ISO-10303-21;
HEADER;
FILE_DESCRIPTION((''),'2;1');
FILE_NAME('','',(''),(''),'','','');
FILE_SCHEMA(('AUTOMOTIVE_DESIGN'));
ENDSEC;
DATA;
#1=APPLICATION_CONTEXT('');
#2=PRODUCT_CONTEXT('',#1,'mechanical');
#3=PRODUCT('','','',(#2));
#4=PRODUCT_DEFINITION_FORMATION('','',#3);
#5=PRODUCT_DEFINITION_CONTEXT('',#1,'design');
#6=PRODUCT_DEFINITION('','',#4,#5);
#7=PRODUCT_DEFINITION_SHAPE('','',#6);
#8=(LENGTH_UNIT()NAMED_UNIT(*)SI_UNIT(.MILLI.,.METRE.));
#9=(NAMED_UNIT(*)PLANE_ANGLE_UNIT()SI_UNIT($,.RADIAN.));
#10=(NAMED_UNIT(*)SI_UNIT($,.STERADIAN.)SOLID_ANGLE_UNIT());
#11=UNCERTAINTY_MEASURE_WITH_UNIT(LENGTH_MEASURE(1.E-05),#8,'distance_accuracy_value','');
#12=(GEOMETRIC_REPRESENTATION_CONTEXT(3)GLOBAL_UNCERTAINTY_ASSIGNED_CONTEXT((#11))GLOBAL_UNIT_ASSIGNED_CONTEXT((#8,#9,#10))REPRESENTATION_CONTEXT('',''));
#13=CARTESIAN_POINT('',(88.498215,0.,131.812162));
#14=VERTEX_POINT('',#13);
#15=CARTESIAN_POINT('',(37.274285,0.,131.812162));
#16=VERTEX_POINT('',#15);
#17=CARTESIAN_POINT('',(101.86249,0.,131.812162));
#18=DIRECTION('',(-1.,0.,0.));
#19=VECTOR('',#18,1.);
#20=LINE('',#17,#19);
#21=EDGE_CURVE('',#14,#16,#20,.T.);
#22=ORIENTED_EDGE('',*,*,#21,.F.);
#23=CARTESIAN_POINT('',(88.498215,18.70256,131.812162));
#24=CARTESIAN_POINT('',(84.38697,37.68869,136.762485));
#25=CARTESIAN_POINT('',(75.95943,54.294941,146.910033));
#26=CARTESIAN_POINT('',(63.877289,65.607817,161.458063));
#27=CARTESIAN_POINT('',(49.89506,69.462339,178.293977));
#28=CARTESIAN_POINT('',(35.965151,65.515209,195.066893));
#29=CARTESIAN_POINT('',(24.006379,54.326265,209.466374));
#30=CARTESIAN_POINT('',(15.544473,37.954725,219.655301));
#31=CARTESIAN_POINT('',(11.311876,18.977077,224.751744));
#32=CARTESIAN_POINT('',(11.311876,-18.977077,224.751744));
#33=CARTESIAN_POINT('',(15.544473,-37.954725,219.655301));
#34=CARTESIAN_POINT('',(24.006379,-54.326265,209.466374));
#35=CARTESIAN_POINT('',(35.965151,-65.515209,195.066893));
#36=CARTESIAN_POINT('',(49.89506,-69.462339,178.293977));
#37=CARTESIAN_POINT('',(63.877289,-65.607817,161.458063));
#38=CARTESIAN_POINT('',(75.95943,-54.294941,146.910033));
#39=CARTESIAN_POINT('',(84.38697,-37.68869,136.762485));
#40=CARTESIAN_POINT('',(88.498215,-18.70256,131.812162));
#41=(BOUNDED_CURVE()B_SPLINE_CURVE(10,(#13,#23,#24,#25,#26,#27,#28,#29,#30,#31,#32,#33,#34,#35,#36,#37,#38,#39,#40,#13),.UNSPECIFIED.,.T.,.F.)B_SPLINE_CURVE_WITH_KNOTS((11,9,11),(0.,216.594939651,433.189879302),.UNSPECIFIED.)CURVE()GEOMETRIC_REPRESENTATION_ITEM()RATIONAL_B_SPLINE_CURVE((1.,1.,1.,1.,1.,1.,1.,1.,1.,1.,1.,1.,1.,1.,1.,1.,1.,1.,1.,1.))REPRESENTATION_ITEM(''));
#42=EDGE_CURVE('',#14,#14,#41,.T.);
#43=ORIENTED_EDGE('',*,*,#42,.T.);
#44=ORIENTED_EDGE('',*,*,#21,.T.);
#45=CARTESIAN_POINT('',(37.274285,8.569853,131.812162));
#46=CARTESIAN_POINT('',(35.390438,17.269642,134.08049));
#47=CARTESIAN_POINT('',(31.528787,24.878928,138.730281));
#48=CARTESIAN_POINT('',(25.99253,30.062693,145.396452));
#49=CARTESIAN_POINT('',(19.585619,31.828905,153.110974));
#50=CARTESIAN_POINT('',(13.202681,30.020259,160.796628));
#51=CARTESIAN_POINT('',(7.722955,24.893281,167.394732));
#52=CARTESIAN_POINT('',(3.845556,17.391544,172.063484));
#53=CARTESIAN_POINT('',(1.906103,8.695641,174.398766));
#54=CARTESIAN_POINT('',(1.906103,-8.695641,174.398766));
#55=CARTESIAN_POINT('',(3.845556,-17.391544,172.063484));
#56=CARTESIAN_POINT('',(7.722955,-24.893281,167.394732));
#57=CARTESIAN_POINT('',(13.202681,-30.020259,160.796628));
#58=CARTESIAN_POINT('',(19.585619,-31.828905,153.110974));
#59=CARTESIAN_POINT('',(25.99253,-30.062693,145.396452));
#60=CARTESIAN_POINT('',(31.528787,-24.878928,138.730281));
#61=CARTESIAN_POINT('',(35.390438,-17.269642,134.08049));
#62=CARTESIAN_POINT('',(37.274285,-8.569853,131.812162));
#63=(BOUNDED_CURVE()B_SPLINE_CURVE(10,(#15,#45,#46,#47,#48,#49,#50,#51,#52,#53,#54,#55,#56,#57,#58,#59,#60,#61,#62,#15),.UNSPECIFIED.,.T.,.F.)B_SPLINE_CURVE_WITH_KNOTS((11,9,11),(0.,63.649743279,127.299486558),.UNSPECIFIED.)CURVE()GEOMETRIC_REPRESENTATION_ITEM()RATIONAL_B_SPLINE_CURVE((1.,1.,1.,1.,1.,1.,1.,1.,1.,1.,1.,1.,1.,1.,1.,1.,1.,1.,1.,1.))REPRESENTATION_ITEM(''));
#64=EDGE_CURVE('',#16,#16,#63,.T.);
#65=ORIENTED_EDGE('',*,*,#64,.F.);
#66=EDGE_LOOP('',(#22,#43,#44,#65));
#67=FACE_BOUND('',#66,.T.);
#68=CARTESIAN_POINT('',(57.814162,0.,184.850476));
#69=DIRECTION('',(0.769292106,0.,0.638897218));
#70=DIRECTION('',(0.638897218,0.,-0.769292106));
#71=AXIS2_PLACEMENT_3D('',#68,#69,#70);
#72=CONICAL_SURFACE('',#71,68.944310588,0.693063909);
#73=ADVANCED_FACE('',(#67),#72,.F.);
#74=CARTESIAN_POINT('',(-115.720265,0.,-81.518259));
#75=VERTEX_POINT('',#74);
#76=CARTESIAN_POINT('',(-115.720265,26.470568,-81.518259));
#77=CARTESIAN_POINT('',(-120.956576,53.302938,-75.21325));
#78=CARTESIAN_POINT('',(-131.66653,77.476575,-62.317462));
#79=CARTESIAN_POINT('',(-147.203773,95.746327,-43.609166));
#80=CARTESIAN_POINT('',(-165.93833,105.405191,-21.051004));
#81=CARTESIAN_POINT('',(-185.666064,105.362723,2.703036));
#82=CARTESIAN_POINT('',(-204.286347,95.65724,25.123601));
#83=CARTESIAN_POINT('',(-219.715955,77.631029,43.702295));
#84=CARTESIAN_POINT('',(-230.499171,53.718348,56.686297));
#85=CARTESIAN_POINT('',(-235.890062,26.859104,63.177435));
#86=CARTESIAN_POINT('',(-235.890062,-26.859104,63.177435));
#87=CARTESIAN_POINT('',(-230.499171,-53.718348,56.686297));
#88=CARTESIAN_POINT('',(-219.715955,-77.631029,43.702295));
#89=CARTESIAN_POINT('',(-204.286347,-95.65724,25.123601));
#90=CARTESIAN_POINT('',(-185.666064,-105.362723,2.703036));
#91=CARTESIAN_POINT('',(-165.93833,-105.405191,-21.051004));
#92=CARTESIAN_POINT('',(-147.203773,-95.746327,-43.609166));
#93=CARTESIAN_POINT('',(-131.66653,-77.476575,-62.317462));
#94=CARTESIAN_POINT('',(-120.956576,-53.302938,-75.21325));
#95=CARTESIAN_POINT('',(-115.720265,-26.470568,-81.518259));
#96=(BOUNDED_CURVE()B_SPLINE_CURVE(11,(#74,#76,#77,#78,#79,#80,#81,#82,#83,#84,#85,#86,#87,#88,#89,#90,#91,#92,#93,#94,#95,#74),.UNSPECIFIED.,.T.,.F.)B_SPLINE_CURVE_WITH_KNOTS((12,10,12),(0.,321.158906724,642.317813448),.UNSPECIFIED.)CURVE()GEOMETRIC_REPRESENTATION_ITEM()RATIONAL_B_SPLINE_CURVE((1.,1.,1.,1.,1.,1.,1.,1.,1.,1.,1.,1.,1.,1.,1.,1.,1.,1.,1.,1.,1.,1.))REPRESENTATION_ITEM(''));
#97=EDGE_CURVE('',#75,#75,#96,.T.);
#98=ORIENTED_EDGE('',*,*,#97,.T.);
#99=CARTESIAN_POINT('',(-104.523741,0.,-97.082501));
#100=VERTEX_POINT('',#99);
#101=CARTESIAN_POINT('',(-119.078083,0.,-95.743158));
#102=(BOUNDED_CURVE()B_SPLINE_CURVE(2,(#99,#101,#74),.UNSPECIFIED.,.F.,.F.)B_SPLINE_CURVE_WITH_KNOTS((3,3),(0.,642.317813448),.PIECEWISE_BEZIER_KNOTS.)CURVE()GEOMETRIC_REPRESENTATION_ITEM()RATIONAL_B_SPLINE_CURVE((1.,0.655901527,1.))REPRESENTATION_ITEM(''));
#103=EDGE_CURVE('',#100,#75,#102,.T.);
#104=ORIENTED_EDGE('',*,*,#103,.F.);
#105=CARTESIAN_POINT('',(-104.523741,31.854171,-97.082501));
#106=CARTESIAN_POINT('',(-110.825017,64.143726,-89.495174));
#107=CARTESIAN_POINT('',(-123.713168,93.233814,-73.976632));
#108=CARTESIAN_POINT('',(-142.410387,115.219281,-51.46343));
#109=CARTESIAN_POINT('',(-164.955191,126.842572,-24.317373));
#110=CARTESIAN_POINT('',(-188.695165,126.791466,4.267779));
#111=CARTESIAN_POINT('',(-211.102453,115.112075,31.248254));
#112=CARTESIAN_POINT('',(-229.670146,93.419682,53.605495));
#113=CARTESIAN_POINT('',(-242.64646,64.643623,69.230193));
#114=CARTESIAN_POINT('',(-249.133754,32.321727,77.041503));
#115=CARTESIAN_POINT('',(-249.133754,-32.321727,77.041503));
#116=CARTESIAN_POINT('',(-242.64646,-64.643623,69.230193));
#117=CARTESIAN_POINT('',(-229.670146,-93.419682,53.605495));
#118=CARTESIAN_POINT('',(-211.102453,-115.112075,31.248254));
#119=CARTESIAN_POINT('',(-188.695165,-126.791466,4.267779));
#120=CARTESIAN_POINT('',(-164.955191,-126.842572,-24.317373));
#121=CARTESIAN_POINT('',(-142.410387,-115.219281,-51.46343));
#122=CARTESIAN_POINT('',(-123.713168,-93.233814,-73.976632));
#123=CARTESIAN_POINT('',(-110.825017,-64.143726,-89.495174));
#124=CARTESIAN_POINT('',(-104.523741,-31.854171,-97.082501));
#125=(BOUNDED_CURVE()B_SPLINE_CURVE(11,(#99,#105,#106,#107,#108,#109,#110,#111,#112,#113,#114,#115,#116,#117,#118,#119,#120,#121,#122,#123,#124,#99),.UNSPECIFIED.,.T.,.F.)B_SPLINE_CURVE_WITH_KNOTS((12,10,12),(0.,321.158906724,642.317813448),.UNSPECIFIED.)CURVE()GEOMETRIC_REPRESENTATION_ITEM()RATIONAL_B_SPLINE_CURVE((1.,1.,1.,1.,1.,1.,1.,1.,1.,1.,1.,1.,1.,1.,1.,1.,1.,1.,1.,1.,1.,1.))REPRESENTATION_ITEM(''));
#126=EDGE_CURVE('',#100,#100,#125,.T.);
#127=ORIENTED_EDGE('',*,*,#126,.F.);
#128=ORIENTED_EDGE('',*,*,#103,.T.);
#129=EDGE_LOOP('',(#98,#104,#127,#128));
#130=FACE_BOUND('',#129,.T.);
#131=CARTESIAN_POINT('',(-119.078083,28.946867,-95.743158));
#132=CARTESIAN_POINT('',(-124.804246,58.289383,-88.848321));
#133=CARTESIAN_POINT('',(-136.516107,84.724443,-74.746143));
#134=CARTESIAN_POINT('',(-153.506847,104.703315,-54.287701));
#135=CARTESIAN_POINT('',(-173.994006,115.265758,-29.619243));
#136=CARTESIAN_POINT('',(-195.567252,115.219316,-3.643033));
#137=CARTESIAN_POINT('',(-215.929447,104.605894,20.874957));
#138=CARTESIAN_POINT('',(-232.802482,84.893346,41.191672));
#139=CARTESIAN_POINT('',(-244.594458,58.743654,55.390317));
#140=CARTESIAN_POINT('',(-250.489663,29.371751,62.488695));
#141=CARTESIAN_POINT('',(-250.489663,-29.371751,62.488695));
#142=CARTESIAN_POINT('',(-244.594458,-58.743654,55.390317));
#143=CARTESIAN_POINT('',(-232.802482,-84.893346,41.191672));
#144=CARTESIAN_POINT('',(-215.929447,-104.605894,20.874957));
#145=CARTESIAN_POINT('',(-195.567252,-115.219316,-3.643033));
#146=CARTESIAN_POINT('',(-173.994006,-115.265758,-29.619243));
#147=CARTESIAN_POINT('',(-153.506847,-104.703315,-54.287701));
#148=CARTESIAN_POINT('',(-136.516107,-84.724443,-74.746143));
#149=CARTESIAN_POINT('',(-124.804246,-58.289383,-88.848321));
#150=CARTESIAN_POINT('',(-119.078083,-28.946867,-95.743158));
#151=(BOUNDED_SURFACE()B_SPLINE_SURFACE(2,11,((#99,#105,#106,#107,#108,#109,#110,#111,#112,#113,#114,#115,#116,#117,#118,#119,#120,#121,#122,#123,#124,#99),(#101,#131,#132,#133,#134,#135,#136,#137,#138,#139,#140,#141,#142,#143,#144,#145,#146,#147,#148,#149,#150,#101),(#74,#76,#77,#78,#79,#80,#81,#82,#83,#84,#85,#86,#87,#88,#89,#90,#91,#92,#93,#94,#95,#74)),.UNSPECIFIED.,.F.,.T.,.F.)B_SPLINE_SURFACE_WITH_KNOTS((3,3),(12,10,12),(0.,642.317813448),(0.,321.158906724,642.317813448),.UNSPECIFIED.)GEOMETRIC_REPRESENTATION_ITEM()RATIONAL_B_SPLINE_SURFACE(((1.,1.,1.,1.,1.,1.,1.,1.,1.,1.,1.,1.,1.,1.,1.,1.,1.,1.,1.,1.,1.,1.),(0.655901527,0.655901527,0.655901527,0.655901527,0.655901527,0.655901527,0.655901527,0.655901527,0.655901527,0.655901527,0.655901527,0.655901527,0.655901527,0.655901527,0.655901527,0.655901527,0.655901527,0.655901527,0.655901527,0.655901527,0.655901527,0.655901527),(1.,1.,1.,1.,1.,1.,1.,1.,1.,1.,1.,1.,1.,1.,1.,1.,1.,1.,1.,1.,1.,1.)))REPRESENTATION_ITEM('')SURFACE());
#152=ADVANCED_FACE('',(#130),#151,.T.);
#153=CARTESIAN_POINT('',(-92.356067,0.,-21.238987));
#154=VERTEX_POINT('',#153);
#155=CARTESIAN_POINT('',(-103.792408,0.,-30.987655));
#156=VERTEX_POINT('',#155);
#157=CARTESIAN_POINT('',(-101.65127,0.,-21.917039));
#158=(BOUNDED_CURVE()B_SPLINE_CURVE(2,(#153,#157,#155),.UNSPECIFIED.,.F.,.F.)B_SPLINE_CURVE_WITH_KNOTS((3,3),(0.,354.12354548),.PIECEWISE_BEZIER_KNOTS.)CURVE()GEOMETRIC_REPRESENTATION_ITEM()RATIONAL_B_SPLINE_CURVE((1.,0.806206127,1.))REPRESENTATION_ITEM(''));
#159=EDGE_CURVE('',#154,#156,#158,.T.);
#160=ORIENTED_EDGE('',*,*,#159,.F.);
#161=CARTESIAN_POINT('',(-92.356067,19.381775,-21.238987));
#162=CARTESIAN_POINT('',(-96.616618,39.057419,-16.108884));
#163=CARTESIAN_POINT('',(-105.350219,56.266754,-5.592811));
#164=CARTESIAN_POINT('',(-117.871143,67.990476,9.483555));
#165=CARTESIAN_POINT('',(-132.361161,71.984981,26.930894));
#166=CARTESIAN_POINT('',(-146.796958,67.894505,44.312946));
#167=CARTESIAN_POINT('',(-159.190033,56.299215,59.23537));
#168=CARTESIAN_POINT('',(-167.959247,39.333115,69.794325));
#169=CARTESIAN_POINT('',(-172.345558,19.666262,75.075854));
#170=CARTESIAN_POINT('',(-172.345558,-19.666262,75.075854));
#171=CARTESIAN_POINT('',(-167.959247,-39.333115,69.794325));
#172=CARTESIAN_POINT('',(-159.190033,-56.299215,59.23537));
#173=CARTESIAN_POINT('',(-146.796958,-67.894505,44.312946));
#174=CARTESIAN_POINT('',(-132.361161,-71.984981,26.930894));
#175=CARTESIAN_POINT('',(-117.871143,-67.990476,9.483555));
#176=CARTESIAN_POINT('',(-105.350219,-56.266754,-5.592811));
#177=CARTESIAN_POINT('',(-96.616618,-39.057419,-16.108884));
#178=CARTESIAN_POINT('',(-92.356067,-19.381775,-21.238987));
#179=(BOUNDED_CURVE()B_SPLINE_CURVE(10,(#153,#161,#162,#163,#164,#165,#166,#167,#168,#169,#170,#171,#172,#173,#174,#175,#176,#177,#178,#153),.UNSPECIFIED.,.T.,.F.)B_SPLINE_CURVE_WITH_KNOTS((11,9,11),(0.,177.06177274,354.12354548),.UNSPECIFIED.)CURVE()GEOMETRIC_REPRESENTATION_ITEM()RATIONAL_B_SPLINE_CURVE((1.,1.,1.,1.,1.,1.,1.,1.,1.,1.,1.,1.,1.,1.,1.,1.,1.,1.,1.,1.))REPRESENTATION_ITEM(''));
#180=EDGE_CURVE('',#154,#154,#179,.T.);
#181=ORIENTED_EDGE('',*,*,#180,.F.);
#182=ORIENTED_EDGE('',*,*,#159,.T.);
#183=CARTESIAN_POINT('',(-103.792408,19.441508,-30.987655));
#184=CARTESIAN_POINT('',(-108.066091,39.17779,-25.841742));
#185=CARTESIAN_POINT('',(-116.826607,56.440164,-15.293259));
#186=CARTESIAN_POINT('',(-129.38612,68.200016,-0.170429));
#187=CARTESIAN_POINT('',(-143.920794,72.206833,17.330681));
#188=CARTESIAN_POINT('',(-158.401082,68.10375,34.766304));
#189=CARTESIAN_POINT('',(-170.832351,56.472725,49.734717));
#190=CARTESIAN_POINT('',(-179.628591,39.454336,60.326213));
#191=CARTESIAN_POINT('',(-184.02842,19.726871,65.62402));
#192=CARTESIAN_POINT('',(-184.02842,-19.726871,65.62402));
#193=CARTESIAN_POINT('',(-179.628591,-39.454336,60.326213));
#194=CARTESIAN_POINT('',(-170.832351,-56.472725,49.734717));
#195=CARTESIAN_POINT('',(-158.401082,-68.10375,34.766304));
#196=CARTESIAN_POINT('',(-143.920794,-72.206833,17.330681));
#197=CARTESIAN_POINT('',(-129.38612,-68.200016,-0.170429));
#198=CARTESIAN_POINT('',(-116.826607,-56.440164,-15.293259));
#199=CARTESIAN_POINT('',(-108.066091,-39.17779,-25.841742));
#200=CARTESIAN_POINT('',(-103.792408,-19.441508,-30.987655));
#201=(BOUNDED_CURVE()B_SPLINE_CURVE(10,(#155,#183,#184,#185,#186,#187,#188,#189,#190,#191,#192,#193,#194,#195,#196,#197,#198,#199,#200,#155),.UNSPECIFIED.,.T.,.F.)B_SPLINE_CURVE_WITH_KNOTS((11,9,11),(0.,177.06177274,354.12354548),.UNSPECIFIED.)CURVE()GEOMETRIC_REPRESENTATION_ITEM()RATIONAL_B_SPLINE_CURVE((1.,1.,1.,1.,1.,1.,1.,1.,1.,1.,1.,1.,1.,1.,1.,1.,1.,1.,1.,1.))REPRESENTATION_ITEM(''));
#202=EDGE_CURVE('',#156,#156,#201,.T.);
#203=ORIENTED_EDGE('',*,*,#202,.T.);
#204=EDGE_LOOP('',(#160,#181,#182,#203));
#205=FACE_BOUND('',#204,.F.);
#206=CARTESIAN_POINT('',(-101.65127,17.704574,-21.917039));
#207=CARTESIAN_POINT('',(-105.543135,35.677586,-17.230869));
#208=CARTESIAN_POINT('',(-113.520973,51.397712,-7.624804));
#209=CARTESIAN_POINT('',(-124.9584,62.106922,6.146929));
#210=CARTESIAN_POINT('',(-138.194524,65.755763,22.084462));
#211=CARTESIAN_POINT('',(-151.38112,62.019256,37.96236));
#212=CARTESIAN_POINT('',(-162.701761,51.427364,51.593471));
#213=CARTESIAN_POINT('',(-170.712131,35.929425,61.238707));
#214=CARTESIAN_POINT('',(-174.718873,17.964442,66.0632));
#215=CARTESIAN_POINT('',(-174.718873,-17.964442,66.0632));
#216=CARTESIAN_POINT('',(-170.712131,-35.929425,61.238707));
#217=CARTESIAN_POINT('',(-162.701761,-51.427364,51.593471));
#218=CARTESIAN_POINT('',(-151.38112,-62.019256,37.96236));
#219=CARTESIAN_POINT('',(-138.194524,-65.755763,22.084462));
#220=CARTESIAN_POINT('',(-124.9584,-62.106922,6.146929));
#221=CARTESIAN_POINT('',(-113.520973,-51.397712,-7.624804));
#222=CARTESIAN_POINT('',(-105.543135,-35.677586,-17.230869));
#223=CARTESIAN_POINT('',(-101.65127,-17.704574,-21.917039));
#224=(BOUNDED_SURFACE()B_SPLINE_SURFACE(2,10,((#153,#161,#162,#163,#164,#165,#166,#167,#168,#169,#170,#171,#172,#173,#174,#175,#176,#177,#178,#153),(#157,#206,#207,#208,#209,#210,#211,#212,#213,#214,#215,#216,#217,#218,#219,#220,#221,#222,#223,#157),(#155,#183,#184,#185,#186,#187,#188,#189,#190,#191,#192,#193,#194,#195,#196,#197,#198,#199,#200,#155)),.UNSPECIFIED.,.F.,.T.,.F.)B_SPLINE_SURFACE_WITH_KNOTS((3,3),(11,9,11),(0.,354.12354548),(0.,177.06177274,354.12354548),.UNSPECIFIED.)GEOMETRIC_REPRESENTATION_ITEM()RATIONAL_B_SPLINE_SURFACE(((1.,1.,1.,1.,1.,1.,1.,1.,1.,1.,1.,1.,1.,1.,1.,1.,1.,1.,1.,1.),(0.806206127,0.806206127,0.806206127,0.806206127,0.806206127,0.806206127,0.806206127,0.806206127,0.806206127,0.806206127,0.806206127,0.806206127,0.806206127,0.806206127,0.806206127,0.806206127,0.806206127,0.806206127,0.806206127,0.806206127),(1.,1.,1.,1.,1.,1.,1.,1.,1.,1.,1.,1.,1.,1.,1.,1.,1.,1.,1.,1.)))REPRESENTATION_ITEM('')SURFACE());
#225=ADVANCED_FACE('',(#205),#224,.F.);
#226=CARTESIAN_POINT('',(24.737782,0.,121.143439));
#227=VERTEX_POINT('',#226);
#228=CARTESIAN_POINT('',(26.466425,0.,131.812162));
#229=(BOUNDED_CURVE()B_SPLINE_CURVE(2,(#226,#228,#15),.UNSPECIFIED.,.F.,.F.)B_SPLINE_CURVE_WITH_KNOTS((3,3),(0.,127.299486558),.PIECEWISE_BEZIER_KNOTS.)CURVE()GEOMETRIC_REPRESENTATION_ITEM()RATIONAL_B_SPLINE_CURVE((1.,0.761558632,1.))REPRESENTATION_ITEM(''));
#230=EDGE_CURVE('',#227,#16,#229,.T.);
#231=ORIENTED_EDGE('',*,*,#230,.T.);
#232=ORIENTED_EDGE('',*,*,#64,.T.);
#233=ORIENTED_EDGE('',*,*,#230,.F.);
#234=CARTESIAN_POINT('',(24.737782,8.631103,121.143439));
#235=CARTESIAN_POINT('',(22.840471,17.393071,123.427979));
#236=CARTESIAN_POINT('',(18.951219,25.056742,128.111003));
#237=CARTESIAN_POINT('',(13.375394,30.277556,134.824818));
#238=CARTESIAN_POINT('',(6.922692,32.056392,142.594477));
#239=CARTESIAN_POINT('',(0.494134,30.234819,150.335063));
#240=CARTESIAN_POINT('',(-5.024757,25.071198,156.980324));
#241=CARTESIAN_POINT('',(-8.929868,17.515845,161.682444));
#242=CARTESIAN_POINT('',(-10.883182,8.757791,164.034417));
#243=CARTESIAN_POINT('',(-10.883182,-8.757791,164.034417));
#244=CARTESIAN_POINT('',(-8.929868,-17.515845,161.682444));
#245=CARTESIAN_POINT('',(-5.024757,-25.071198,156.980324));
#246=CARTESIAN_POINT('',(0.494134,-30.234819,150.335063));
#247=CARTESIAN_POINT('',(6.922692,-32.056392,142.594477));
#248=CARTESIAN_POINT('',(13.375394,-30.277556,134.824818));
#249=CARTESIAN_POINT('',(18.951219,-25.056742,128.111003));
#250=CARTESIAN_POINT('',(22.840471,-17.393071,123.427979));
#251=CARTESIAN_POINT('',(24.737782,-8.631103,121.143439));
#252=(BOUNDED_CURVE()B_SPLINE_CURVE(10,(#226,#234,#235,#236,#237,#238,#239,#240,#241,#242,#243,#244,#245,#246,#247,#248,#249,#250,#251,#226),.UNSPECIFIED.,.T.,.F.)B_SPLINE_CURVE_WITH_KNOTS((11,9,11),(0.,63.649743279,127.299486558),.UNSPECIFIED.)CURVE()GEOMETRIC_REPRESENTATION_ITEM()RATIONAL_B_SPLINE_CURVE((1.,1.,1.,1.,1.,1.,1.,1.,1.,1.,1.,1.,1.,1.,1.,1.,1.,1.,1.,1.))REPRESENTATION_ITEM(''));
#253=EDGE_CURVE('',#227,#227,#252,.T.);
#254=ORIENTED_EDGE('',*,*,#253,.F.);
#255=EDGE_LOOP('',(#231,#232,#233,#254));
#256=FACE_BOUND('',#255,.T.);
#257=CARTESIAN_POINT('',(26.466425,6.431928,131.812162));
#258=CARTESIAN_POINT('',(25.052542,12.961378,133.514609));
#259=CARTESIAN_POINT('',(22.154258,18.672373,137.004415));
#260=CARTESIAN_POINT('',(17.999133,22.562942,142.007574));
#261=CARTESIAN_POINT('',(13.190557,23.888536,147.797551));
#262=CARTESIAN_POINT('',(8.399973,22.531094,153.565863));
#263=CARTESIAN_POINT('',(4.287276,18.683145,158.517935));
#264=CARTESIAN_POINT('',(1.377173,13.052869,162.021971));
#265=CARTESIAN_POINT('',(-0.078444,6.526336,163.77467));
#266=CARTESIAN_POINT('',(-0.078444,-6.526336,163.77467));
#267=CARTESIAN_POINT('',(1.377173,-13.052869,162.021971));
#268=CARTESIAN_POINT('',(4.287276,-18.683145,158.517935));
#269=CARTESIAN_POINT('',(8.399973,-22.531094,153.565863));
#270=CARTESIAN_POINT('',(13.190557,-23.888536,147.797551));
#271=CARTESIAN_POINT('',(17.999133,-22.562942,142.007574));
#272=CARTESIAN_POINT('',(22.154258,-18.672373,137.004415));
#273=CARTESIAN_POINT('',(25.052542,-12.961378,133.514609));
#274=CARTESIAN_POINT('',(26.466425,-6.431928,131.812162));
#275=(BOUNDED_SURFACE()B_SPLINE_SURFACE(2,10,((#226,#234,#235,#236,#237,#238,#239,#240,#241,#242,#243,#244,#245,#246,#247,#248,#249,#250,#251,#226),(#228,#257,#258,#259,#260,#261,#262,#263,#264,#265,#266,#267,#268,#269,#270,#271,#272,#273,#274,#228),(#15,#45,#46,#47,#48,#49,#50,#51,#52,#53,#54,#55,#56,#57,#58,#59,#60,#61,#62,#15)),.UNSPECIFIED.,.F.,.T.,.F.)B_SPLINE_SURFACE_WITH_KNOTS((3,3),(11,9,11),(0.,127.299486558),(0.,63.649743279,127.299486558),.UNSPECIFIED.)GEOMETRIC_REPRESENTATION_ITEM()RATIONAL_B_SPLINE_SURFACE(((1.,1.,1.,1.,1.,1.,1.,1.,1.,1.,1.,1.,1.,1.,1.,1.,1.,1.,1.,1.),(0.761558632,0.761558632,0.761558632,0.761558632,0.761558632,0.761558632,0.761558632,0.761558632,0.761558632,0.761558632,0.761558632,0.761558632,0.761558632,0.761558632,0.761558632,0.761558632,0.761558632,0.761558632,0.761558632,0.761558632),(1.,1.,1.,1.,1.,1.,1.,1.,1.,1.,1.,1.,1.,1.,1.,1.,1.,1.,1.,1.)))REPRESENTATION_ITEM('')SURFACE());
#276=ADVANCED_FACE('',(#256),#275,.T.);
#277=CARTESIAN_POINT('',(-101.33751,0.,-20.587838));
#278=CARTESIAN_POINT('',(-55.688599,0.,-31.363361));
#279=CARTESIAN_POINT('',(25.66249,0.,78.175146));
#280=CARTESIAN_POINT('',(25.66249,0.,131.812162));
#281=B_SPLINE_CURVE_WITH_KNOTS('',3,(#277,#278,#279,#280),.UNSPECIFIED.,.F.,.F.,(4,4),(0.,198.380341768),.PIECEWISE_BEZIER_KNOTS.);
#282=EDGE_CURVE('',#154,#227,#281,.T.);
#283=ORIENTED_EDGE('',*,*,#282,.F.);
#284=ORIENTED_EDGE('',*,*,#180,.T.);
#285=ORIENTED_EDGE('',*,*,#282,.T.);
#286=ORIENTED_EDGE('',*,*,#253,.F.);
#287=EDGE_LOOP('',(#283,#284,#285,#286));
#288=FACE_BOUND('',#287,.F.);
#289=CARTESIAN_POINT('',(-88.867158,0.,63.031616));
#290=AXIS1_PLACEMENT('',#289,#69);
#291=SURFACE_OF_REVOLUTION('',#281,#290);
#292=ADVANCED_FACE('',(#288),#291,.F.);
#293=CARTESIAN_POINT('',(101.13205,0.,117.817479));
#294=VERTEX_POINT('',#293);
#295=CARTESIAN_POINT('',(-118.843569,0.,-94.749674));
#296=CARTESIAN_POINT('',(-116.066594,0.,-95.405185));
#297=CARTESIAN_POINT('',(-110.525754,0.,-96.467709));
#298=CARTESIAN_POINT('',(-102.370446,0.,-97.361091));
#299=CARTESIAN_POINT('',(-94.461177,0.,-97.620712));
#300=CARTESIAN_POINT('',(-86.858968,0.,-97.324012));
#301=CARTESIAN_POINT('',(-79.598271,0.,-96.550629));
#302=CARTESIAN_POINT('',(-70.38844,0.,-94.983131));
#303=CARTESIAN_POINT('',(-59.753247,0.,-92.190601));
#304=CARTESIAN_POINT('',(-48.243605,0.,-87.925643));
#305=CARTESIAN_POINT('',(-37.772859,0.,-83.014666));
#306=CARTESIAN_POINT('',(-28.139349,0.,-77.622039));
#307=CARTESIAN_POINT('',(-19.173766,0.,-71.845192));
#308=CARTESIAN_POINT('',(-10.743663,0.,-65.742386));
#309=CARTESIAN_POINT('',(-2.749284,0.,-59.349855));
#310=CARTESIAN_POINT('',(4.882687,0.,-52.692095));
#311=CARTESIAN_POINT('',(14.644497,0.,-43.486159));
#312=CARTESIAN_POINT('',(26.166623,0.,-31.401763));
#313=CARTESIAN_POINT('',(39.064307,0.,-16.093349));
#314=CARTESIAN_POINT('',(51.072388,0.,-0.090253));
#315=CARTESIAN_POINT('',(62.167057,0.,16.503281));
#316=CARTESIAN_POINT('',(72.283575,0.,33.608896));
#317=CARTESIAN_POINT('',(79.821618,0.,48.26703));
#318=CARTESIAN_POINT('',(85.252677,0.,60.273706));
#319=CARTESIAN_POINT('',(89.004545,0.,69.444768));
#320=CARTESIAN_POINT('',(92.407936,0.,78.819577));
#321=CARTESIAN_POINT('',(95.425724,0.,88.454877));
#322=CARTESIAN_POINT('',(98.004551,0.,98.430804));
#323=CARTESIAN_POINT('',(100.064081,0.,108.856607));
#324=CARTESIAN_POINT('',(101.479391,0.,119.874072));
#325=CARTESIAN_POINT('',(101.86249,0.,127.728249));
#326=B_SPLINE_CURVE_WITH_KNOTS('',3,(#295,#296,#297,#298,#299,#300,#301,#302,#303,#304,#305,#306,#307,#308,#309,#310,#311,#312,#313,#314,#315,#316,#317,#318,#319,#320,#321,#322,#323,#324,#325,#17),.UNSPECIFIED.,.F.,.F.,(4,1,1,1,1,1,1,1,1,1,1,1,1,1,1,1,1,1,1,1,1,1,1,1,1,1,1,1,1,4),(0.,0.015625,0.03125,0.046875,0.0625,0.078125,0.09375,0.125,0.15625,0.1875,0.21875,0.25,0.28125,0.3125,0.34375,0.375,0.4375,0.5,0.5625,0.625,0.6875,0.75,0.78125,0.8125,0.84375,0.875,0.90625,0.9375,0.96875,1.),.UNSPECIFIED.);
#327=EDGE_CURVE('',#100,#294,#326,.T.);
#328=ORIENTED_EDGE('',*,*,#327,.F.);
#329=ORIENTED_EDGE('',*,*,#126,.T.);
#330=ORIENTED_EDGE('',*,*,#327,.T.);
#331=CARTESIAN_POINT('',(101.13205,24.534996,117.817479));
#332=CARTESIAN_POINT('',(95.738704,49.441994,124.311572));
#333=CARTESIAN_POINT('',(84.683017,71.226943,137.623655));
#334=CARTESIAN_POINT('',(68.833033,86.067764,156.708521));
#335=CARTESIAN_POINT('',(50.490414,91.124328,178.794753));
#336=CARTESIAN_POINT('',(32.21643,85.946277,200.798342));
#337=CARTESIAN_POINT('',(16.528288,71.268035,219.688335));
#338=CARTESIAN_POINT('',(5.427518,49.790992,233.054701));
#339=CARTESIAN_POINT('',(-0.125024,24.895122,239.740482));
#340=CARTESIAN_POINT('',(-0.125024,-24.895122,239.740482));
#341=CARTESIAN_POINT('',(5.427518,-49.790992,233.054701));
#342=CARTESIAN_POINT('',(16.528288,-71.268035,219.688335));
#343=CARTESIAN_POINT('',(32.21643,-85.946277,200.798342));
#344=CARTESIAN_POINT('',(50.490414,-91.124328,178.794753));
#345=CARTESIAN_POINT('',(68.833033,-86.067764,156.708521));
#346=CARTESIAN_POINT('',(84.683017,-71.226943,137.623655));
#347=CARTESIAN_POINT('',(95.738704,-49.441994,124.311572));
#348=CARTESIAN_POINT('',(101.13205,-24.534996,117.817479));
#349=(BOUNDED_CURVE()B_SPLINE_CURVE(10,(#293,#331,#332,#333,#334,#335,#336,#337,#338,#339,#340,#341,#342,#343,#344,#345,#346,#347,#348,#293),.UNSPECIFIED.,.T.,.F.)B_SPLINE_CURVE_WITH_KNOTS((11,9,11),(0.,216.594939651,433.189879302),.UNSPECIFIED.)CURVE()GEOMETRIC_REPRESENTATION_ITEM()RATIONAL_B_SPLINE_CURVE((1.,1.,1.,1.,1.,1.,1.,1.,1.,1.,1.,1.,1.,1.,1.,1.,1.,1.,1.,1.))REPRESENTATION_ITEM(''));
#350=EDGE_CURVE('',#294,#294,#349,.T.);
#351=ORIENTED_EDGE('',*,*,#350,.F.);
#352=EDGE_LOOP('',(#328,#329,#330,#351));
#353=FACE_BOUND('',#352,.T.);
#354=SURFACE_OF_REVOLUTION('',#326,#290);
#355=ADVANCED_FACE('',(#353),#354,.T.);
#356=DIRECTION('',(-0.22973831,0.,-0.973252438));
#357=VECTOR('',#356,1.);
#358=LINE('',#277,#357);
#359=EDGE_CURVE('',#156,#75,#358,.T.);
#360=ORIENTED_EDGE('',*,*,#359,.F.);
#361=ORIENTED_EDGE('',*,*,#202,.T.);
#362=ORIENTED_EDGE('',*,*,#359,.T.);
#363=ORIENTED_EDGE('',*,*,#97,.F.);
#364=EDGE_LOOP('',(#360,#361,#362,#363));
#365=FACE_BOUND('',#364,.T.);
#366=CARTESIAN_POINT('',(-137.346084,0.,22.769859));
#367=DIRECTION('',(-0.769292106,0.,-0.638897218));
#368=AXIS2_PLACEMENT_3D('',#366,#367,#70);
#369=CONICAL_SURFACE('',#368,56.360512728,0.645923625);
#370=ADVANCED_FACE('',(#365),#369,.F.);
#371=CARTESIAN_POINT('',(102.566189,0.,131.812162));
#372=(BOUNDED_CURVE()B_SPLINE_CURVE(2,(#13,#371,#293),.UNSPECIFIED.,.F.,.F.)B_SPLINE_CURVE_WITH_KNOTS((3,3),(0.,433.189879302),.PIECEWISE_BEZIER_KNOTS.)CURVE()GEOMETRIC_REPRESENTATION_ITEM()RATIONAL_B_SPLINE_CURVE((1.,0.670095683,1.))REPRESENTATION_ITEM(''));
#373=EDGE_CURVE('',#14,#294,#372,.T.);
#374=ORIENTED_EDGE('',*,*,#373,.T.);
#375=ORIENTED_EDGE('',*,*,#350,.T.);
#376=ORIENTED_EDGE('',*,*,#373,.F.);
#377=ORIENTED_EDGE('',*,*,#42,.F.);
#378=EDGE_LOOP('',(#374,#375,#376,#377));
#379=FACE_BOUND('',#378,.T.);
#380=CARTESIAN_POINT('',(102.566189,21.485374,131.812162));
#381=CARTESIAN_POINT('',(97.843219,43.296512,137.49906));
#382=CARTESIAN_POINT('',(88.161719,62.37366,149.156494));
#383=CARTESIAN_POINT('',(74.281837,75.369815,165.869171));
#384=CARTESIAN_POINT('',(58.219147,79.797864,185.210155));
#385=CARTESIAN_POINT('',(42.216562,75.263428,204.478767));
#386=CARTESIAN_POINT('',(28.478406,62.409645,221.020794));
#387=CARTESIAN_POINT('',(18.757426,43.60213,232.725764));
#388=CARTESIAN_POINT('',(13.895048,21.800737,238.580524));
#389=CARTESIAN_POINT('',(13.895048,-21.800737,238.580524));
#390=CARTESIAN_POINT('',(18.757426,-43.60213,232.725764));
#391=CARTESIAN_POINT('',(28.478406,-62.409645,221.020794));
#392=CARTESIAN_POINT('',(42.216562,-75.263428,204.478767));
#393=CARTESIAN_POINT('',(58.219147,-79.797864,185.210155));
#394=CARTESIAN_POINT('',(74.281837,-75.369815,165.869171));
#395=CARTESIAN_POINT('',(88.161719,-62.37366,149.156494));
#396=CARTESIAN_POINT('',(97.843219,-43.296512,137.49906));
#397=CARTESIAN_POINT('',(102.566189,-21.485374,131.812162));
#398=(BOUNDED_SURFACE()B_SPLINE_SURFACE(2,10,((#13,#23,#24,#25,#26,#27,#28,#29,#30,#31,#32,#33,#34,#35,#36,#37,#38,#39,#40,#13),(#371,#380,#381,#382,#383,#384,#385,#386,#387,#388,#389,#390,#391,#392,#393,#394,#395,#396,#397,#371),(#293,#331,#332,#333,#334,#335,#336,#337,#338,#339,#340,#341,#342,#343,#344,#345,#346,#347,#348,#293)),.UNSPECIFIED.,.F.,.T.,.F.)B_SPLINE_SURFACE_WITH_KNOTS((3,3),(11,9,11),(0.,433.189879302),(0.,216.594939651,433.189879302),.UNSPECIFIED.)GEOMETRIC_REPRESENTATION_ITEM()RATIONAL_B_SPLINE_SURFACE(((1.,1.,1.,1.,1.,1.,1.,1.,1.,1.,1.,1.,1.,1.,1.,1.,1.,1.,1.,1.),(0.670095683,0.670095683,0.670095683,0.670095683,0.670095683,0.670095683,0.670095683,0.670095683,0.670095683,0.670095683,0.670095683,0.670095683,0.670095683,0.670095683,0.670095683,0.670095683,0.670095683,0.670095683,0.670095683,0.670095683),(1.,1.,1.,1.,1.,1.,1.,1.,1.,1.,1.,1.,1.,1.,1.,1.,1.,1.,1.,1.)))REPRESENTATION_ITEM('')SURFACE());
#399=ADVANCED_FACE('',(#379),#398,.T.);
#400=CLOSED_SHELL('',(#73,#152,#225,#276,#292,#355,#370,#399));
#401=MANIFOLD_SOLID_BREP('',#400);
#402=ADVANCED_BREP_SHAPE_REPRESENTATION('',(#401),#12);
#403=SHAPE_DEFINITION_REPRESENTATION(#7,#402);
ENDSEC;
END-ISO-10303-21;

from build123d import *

# Parameters (mm, degrees)
F2_R = 12.7


# Not quite as in the source:
# - the dataset's text gives a spline's control points without its knots; the knots are read off the source's solid


with BuildPart() as f1:
    # F0 (on Front) → F1 (revolve)
    with BuildSketch(Plane.XZ):
        with BuildLine():
            add(Edge.make_bspline(
                [(-101.3375095095, -20.5878382494), (-55.6885989604, -31.3633607521), (25.6624904905, 78.1751456829), (25.6624904905, 131.8121617506)],
                knots=[0, 0, 0, 0, 198.380341768, 198.380341768, 198.380341768, 198.380341768], degree=3))
            Line((-101.3375095095, -20.5878382494), (-118.843568713, -94.7496740625))
            add(Edge.make_bspline(
                [(-118.843568713, -94.7496740625), (-116.0665941497, -95.4051848192), (-110.5257544065, -96.4677086889), (-102.3704459239, -97.3610907466), (-94.4611771904, -97.6207116792), (-86.8589683948, -97.3240119803), (-79.5982708953, -96.5506288996), (-70.3884403509, -94.9831314605), (-59.7532470515, -92.1906012776), (-48.2436048503, -87.9256433043), (-37.7728593934, -83.0146660473), (-28.1393493281, -77.6220391827), (-19.1737656331, -71.8451920299), (-10.7436627877, -65.7423860316), (-2.7492840154, -59.349854765), (4.8826869498, -52.6920953283), (14.6444972187, -43.4861585595), (26.1666233679, -31.4017634463), (39.0643071657, -16.0933493701), (51.0723883895, -0.0902528239), (62.1670566032, 16.5032811769), (72.2835752268, 33.6088961345), (79.8216178481, 48.2670302643), (85.2526772661, 60.2737062446), (89.0045449002, 69.4447684498), (92.4079357388, 78.8195768972), (95.425724145, 88.4548766457), (98.0045512843, 98.430804011), (100.0640809873, 108.856607232), (101.4793909888, 119.8740724547), (101.8624904905, 127.7282488634), (101.8624904905, 131.8121617506)],
                knots=[0, 0, 0, 0, 0.015625, 0.03125, 0.046875, 0.0625, 0.078125, 0.09375, 0.125, 0.15625, 0.1875, 0.21875, 0.25, 0.28125, 0.3125, 0.34375, 0.375, 0.4375, 0.5, 0.5625, 0.625, 0.6875, 0.75, 0.78125, 0.8125, 0.84375, 0.875, 0.90625, 0.9375, 0.96875, 1, 1, 1, 1], degree=3))
            Line((101.8624904905, 131.8121617506), (25.6624904905, 131.8121617506))
        make_face()
    revolve(axis=Axis((-88.8671576977, 0, 63.0316156894), (0.7692921059, 0, 0.6388972185)))

    # F2
    f2_edges = [f1.edges().sort_by_distance(p)[0] for p in [
        (-249.470009, 0, 62.536797),
        (-173.354659, 0, 66.127557),
        (-110.090539, 0, -57.668756),
        (-0.226063, 0, 162.984405),
        (13.765834, 0, 237.88879),
        (63.76249, 0, 131.812162),
    ]]
    fillet(f2_edges, radius=F2_R)


solid = f1.part
